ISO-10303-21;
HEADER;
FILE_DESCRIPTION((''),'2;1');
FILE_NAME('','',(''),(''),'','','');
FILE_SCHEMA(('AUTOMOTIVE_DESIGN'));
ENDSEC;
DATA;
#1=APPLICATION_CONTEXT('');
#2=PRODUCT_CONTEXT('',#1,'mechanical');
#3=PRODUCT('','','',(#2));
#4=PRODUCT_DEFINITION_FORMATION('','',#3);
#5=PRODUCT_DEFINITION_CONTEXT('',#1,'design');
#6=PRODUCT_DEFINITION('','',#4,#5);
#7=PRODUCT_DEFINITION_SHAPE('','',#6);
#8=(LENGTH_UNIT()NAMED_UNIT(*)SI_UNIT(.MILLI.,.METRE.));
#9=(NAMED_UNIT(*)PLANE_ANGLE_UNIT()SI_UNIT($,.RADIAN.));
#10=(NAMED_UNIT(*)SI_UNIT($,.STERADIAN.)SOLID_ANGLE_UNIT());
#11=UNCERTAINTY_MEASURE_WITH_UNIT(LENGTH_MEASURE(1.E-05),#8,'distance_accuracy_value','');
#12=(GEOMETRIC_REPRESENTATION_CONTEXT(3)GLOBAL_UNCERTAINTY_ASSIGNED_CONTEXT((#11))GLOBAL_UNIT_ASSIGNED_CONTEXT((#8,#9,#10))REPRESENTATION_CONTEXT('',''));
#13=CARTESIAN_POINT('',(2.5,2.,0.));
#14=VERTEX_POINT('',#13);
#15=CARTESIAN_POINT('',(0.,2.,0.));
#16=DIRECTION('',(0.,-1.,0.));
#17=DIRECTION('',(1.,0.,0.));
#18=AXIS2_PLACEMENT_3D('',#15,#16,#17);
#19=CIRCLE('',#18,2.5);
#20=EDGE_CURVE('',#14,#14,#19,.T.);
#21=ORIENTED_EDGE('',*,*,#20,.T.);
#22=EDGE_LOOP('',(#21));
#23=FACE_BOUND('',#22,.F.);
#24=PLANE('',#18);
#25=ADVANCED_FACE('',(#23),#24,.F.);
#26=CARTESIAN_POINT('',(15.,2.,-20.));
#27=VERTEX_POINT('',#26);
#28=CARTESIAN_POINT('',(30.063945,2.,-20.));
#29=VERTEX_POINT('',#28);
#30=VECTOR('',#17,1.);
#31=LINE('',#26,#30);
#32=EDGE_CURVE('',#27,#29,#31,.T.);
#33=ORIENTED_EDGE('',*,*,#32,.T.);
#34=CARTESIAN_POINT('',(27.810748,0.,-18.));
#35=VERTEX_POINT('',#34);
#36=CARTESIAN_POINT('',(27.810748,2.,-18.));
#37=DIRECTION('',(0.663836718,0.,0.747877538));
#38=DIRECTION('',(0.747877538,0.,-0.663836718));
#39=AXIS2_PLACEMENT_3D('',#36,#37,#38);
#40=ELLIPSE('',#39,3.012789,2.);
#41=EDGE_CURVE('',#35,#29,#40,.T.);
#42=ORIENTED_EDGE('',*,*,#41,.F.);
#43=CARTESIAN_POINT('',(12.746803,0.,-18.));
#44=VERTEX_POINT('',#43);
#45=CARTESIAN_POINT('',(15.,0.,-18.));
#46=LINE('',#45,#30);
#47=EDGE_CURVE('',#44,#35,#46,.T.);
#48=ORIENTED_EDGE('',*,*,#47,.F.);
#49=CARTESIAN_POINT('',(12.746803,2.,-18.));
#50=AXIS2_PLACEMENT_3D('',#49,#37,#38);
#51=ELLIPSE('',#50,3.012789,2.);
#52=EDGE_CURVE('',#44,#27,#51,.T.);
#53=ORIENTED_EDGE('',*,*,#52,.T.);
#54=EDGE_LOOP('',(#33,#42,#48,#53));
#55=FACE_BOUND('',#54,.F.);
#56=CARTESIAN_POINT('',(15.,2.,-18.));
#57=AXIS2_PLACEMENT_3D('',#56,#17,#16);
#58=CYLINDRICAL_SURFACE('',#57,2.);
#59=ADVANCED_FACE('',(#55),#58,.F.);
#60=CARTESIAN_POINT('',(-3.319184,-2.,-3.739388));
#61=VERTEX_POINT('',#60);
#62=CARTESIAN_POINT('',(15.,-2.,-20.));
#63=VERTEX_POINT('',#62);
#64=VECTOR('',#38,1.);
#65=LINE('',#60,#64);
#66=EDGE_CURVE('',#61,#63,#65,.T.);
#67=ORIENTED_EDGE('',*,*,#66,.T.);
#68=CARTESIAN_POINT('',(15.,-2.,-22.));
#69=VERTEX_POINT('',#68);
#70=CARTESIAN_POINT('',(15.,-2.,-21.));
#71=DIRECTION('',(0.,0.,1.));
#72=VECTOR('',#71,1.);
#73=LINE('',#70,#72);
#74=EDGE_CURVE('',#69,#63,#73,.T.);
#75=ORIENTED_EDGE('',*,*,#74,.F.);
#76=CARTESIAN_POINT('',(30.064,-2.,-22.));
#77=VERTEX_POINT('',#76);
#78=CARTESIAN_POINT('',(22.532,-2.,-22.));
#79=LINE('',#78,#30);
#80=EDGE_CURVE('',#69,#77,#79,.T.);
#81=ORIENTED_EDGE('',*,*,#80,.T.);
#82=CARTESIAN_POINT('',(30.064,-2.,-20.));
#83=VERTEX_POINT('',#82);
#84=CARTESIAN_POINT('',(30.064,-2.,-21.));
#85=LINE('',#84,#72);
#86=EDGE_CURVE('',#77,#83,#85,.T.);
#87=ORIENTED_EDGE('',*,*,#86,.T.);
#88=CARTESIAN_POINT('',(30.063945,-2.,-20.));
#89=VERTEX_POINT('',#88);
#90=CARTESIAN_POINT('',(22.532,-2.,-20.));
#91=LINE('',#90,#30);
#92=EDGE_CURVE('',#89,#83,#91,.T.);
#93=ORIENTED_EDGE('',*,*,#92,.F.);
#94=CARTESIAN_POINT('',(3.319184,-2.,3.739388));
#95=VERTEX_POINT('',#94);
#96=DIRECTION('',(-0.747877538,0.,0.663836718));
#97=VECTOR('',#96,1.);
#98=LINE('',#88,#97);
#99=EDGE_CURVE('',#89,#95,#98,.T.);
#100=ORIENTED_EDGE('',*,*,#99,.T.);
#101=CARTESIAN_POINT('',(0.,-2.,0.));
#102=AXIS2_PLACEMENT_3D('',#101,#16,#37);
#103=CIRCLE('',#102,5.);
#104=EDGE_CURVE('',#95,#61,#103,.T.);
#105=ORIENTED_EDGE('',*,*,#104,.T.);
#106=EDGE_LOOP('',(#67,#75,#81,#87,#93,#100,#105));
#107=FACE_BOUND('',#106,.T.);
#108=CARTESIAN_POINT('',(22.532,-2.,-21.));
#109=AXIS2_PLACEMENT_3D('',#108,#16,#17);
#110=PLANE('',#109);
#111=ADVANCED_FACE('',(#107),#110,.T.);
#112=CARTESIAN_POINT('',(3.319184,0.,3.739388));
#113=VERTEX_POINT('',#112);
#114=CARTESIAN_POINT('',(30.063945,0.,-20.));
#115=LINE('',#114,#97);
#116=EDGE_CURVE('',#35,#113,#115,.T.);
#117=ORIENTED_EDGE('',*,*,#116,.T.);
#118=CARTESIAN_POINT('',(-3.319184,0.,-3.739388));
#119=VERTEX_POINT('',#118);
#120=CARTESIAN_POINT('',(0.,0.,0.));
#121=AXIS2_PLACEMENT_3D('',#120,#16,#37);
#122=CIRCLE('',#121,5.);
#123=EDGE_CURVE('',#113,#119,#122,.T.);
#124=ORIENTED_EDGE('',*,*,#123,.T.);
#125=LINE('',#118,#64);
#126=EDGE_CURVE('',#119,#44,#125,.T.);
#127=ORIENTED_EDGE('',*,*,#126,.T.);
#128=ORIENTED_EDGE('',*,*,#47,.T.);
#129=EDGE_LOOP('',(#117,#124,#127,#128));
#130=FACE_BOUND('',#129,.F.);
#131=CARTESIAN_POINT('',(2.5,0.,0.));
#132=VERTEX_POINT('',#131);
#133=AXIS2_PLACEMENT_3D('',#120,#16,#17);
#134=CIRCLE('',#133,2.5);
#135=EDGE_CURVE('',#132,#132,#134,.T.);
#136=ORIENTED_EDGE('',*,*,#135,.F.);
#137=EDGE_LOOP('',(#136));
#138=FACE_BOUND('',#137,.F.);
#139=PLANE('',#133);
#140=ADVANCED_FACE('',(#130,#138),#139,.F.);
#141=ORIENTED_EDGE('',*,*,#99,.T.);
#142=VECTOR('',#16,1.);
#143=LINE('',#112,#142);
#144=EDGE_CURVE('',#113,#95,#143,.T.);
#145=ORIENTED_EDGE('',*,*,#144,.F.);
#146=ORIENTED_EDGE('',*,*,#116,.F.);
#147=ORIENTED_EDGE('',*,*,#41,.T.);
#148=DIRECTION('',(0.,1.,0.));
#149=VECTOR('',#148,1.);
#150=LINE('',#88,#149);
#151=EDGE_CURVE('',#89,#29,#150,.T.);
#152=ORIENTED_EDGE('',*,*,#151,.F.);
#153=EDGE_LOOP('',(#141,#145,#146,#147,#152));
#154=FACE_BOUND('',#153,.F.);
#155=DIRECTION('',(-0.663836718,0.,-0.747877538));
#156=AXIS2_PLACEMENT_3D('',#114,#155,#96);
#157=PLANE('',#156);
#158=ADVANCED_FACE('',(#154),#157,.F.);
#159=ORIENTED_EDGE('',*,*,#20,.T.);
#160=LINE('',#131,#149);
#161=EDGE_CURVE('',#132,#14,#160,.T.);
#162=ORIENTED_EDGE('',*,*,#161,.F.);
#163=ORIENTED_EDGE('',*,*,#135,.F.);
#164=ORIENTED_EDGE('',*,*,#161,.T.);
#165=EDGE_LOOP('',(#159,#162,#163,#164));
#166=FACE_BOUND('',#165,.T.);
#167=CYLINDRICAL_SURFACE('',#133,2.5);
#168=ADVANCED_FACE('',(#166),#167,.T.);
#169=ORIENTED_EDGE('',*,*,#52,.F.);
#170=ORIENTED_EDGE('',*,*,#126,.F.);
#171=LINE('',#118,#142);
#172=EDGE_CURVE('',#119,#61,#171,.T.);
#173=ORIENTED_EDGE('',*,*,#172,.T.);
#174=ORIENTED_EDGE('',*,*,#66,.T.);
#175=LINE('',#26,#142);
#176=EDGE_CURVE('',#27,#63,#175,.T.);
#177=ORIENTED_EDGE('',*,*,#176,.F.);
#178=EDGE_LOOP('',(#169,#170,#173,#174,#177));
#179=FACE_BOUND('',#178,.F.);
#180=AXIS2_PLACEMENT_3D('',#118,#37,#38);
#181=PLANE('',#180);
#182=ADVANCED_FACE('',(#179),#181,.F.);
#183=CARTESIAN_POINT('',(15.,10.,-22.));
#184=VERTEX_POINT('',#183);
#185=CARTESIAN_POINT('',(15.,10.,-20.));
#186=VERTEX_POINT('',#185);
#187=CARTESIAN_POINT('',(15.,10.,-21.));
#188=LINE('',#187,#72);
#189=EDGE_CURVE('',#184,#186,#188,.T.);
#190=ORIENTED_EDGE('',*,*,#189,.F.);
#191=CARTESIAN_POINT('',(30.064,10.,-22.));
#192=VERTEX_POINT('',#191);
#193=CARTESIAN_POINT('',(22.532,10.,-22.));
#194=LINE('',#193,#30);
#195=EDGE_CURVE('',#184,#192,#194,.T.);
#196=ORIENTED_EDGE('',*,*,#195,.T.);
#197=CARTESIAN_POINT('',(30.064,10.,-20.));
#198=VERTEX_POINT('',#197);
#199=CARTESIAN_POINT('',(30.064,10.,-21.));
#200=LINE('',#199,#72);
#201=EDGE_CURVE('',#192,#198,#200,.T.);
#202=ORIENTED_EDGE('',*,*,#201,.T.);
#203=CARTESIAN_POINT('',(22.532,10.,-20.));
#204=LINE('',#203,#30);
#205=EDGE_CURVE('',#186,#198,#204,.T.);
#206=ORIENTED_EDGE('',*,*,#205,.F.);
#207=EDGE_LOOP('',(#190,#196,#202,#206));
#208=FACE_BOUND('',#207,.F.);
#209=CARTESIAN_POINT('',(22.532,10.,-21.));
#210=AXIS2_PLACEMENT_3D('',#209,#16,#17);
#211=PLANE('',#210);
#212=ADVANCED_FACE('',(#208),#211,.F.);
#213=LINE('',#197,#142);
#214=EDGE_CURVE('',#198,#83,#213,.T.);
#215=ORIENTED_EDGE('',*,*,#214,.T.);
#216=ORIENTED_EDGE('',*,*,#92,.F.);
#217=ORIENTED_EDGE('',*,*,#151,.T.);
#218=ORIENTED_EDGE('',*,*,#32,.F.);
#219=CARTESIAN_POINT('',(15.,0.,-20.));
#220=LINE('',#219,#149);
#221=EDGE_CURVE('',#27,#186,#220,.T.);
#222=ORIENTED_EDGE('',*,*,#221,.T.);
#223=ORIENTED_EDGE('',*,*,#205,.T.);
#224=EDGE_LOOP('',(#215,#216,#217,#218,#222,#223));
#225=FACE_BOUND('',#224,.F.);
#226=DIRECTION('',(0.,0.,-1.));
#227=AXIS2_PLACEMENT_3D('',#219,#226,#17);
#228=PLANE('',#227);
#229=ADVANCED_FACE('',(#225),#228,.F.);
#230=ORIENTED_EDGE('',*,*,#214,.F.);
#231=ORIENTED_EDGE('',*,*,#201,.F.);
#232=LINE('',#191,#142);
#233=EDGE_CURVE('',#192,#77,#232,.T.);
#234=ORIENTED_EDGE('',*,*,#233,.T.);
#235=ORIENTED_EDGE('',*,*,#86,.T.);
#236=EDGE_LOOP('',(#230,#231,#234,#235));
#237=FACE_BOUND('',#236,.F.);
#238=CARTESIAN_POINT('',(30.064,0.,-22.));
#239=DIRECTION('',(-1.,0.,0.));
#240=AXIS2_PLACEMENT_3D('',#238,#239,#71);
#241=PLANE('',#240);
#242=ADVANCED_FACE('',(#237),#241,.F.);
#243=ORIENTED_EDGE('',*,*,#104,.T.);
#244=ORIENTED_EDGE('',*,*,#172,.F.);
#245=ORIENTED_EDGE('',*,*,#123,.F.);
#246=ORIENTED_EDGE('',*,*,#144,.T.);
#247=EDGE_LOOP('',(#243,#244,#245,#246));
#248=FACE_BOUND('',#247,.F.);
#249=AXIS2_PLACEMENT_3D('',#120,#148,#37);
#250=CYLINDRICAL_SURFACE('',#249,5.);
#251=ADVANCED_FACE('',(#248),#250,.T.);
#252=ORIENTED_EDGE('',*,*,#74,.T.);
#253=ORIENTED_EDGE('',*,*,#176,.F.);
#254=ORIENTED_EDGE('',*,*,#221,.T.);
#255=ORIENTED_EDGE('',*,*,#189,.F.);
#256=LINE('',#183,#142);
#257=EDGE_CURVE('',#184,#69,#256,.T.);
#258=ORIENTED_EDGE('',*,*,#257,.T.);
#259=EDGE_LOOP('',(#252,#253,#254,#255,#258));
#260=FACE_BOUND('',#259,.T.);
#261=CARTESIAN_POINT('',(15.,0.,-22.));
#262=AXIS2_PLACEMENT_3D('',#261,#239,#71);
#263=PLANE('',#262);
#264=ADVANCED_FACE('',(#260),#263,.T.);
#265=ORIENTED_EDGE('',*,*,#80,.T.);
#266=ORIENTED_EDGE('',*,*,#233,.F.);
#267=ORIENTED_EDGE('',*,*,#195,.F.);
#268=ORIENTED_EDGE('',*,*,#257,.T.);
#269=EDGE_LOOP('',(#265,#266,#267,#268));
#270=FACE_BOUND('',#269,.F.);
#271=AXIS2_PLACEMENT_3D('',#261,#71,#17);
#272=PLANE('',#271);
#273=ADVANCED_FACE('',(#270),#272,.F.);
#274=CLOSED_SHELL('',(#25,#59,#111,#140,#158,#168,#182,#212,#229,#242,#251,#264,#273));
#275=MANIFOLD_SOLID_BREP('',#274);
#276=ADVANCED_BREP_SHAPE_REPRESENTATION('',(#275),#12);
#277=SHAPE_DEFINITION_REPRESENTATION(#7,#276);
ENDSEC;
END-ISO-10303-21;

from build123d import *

# Parameters (mm, degrees)
F0_R          = 2.5
F1_DEPTH      = 2
F0_W          = 15.064
F0_H          = 2
F2_DEPTH      = 10
F2_DEPTH_BACK = 2
F3_DEPTH      = 2
F3_DEPTH_BACK = 2
F4_R          = 2


# Not quite as in the source:
# - ends of sketch curves that miss each other by under 0.0002 mm in the source are joined


with BuildPart() as f1:
    # F0 (on Front) → F1 (new body)
    with BuildSketch(Plane.XZ):
        with BuildLine():
            Line((30.0639452948, -20), (3.3191835885, 3.7393876913))
            ThreePointArc((3.3191835885, 3.7393876913), (-3.7393876913, 3.3191835885), (-3.3191835885, -3.7393876913))
            Line((-3.3191835885, -3.7393876913), (15, -20))
            Line((15, -20), (30.0639452948, -20))
        make_face()
        Circle(F0_R, mode=Mode.SUBTRACT)
    extrude(amount=F1_DEPTH)

    # F0 (on Front) → F2 (join, two sides)
    with BuildSketch(Plane.XZ) as f2_sk:
        with Locations((22.532, -21)):
            Rectangle(F0_W, F0_H)
    extrude(amount=-F2_DEPTH)
    extrude(f2_sk.sketch, amount=F2_DEPTH_BACK)

    # F0 (on Front) → F3 (join, two sides)
    with BuildSketch(Plane.XZ) as f3_sk:
        Circle(F0_R)
    extrude(amount=F3_DEPTH)
    extrude(f3_sk.sketch, amount=-F3_DEPTH_BACK)

    # F4
    f4_edges = [f1.edges().sort_by_distance(p)[0] for p in [
        (22.531973, 0, -20),
    ]]
    fillet(f4_edges, radius=F4_R)


solid = f1.part
